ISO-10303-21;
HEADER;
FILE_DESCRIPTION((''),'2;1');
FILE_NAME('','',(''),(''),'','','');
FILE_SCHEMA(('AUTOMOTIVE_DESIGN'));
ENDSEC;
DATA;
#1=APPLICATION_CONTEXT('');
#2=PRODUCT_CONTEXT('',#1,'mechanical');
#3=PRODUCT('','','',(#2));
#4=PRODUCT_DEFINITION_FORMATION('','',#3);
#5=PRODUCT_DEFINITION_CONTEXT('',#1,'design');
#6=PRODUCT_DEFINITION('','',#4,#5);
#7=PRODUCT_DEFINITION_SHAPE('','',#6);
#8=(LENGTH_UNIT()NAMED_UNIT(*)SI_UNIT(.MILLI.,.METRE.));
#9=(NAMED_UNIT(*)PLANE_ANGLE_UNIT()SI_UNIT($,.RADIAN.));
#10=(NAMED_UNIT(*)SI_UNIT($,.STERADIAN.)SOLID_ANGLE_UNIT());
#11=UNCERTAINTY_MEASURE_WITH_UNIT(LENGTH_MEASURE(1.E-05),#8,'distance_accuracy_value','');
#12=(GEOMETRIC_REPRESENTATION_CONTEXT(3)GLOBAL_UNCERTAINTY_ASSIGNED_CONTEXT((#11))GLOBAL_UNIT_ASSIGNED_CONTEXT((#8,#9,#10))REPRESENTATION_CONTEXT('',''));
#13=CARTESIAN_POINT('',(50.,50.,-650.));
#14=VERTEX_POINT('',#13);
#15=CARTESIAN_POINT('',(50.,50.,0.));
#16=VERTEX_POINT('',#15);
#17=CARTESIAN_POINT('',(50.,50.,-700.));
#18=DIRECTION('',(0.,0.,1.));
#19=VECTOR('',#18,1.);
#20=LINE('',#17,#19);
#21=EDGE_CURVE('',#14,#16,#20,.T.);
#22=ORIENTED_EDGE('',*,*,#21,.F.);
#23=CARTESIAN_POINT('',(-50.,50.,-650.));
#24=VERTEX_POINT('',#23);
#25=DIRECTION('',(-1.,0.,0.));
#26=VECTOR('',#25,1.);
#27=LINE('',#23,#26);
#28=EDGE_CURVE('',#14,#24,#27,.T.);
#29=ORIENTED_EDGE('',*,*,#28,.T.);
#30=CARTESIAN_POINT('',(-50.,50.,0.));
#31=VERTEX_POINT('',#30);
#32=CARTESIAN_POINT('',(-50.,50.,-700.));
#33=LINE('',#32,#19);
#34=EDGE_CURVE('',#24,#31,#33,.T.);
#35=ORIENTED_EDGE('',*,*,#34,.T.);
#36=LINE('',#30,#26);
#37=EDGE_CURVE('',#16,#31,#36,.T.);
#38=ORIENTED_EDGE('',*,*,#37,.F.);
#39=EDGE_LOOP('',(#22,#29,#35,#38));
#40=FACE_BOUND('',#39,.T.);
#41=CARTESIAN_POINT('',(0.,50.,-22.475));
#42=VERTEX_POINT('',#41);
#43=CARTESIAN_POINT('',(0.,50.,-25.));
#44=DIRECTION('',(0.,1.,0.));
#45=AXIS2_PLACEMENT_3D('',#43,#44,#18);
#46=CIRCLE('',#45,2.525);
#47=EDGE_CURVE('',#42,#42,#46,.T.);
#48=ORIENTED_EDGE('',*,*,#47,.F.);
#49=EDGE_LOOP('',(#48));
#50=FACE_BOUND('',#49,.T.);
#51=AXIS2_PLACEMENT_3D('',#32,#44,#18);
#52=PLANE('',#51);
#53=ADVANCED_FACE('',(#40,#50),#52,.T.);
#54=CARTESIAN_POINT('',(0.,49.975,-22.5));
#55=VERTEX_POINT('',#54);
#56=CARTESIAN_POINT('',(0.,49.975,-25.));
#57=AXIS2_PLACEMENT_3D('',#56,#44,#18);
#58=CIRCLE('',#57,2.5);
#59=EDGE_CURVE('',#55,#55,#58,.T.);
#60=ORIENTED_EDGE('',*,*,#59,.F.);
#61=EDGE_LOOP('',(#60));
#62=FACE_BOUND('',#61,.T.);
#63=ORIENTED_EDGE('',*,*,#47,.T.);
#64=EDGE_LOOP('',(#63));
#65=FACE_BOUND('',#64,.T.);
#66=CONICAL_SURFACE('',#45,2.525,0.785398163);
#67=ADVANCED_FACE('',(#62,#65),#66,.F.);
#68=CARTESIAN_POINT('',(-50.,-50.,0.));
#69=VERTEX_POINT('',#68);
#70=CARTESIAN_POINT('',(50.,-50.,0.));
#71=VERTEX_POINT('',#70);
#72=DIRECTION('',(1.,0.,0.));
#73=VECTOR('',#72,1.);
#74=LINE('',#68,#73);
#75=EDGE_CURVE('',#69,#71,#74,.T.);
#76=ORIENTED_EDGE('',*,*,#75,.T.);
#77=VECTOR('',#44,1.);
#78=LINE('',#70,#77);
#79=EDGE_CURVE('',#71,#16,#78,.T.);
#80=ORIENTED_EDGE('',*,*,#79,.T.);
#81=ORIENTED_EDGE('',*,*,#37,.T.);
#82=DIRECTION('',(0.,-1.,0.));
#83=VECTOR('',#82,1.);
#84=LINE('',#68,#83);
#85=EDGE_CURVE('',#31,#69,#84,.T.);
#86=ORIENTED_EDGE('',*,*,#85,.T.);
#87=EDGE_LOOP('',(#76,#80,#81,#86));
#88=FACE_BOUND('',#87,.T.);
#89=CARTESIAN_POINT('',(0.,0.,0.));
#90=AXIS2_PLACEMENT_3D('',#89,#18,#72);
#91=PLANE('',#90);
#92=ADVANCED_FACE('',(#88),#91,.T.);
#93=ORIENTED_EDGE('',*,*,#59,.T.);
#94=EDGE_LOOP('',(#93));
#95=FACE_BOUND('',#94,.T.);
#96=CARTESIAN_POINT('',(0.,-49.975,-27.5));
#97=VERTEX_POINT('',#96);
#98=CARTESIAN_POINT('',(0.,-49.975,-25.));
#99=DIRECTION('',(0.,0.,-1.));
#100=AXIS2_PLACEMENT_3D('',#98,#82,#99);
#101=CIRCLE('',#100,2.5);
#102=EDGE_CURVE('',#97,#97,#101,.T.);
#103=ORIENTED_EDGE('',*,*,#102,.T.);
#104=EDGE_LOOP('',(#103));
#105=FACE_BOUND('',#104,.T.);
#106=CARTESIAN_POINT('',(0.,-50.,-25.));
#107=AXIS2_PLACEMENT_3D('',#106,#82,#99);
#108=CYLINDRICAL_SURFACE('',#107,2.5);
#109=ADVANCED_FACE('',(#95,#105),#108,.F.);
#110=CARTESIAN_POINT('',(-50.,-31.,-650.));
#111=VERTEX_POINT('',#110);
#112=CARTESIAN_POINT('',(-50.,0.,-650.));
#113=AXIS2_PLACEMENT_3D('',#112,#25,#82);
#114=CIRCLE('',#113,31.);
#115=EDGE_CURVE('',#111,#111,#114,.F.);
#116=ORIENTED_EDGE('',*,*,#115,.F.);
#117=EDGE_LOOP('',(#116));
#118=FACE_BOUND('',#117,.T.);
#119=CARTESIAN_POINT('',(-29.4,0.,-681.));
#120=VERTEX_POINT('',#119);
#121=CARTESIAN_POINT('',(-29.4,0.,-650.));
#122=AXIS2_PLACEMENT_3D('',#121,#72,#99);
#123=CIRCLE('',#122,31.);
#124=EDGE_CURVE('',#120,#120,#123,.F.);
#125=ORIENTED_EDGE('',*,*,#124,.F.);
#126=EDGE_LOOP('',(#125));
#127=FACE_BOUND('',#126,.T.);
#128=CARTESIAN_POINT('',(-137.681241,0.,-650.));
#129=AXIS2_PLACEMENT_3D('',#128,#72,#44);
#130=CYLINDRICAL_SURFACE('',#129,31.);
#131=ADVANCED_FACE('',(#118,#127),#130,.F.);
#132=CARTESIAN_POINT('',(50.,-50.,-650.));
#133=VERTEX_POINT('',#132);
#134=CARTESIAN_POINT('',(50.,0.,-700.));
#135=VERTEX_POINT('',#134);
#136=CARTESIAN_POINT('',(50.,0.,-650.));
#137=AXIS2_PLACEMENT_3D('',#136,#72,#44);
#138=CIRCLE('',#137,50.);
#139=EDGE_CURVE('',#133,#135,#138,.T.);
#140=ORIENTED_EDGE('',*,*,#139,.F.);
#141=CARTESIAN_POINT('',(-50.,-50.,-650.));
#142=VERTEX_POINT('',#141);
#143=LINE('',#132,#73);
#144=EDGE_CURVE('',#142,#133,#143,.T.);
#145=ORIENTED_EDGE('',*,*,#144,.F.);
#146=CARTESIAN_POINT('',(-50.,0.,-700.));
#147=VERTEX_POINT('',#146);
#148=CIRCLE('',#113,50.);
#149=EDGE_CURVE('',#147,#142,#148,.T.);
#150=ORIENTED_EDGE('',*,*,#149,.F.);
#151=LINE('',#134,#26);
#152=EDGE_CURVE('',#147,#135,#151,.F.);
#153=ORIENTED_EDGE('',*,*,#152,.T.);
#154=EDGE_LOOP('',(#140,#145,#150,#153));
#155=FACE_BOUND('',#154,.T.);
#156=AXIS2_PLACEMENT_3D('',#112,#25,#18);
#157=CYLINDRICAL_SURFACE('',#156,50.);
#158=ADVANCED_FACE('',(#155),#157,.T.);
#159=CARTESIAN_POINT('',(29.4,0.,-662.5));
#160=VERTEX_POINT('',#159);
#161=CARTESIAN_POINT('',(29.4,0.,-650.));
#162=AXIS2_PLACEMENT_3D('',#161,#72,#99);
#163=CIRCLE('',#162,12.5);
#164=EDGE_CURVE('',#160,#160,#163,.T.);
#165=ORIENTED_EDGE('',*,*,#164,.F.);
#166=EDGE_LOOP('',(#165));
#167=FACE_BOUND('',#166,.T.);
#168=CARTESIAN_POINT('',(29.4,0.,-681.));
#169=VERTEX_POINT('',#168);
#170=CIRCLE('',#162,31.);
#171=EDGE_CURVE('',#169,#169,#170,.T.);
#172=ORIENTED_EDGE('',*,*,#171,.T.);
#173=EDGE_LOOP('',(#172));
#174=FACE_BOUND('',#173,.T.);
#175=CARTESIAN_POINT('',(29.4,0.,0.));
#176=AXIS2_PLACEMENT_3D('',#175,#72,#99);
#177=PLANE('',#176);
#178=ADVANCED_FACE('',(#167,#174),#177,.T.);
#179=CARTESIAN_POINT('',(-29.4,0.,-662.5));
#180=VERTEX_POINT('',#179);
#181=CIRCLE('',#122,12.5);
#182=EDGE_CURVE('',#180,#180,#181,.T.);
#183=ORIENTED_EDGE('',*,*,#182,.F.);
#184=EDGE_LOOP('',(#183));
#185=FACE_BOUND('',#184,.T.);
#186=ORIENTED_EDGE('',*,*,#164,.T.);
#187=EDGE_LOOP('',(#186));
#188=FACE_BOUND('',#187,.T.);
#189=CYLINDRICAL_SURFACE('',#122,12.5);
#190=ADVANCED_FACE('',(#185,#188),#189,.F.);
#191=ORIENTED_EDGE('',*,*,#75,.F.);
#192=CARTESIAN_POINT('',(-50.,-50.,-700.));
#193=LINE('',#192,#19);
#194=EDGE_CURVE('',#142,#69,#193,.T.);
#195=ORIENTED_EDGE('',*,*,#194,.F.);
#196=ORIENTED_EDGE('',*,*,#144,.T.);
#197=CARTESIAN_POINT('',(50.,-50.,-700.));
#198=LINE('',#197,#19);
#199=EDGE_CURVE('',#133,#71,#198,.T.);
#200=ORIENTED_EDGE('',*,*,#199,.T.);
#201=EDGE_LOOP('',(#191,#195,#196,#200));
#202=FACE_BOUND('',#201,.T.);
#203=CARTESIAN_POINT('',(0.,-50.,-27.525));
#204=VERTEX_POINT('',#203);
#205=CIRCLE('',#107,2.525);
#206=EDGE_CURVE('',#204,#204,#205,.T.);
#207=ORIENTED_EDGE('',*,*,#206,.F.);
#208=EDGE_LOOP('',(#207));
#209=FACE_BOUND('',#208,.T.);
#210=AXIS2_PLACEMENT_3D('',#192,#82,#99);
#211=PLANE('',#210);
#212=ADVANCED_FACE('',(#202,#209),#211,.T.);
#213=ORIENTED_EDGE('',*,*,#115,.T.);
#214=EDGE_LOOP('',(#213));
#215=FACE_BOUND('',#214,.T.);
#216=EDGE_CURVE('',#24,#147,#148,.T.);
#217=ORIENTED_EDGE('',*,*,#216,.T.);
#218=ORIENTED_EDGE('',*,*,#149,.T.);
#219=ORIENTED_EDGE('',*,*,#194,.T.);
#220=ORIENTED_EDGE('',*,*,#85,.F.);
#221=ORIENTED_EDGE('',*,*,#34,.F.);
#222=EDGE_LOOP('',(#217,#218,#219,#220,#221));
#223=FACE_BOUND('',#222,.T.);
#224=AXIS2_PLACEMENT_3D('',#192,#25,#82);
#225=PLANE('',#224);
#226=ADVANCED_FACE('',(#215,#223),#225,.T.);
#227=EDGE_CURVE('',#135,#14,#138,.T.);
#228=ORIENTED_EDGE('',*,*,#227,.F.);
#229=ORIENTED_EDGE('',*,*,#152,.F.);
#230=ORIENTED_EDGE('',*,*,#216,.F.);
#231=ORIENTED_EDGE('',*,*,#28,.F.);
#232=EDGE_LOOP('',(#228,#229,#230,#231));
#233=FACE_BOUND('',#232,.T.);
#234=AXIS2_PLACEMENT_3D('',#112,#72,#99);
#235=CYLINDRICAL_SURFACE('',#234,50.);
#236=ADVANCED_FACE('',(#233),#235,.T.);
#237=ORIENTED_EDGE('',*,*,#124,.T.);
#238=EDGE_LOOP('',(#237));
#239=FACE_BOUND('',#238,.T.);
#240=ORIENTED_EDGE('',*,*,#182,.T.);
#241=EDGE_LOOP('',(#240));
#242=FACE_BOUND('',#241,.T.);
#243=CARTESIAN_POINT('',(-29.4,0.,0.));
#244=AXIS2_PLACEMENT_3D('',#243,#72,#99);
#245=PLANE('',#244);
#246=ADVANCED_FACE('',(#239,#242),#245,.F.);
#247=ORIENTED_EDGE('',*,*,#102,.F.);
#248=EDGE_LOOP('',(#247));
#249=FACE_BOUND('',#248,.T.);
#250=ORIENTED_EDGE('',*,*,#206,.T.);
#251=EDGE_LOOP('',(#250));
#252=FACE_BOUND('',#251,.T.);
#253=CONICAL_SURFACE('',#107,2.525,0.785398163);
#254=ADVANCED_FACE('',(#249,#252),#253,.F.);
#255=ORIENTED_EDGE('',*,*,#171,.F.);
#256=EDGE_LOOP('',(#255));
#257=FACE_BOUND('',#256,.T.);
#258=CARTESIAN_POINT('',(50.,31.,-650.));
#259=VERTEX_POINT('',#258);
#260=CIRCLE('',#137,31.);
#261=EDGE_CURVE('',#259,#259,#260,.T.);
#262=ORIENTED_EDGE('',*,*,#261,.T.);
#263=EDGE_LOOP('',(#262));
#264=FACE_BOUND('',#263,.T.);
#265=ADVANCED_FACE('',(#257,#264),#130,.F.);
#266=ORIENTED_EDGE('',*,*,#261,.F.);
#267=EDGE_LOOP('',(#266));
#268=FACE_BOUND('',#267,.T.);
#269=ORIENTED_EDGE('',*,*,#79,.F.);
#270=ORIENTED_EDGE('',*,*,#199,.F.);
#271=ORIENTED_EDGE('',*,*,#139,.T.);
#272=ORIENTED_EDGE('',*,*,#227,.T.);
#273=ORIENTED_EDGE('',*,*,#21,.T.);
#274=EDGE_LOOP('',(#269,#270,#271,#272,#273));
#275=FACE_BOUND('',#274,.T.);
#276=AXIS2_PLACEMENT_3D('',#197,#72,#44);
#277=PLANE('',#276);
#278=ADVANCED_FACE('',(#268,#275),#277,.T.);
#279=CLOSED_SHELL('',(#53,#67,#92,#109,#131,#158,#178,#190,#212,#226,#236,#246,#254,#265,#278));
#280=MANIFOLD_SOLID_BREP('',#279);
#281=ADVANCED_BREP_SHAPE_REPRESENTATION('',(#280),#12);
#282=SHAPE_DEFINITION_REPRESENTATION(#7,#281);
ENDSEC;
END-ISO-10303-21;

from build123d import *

# Parameters (mm, degrees)
SKETCH1_W                       = 100
SKETCH1_H                       = 100
BOSS_EXTRUDE1_DEPTH             = 700
FILLET1_R                       = 50
SKETCH2_R                       = 31
CUT_EXTRUDE1_DEPTH              = 100
F_5_0MM_DOWEL_HOLE1_D           = 5
F_5_0MM_DOWEL_HOLE1_CSINK_D     = 5.05
F_5_0MM_DOWEL_HOLE1_CSINK_ANGLE = 90
BOSS_EXTRUDE2_DEPTH             = 29.4
BOSS_EXTRUDE2_DEPTH_BACK        = 29.4
SKETCH6_R                       = 31
SKETCH6_R_2                     = 12.5


with BuildPart() as part:
    # Sketch1 → Boss-Extrude1 (new body)
    with BuildSketch(Plane(origin=(0, 0, 0), x_dir=(0, 1, 0), z_dir=(0, 0, 1))):
        Rectangle(SKETCH1_W, SKETCH1_H)
    extrude(amount=-BOSS_EXTRUDE1_DEPTH)

    # Fillet1
    fillet1_edges = [part.edges().sort_by_distance(p)[0] for p in [
        (0, -50, -700),
        (0, 50, -700),
    ]]
    fillet(fillet1_edges, radius=FILLET1_R - 0.0001)  # a hair under: the kernel refuses the full size

    # Sketch2 → Cut-Extrude1 (cut)
    with BuildSketch(Plane.YZ.offset(50)):
        with Locations((0, -650)):
            Circle(SKETCH2_R)
    extrude(amount=-CUT_EXTRUDE1_DEPTH, mode=Mode.SUBTRACT)

    # Ø5.0mm Dowel Hole1 (through all)
    with Locations(Plane.XZ.offset(50)):
        with Locations((0, -25)):
            f_5_0mm_dowel_hole1 = CounterSinkHole(F_5_0MM_DOWEL_HOLE1_D / 2, F_5_0MM_DOWEL_HOLE1_CSINK_D / 2, counter_sink_angle=F_5_0MM_DOWEL_HOLE1_CSINK_ANGLE)

    # Mirror1: Ø5.0mm Dowel Hole1 across plane
    add(f_5_0mm_dowel_hole1.mirror(Plane.ZX), mode=Mode.SUBTRACT)

    # Sketch6 → Boss-Extrude2 (add, two sides: drawn at the far end of the back side and taken through both)
    with BuildSketch(Plane.YZ.offset(-BOSS_EXTRUDE2_DEPTH_BACK)):
        with Locations(Location((0, -650, 0), (0, 0, 270))):
            Circle(SKETCH6_R)
        with Locations(Location((0, -650, 0), (0, 0, 270))):
            Circle(SKETCH6_R_2, mode=Mode.SUBTRACT)
    extrude(amount=BOSS_EXTRUDE2_DEPTH + BOSS_EXTRUDE2_DEPTH_BACK)


solid = part.part
